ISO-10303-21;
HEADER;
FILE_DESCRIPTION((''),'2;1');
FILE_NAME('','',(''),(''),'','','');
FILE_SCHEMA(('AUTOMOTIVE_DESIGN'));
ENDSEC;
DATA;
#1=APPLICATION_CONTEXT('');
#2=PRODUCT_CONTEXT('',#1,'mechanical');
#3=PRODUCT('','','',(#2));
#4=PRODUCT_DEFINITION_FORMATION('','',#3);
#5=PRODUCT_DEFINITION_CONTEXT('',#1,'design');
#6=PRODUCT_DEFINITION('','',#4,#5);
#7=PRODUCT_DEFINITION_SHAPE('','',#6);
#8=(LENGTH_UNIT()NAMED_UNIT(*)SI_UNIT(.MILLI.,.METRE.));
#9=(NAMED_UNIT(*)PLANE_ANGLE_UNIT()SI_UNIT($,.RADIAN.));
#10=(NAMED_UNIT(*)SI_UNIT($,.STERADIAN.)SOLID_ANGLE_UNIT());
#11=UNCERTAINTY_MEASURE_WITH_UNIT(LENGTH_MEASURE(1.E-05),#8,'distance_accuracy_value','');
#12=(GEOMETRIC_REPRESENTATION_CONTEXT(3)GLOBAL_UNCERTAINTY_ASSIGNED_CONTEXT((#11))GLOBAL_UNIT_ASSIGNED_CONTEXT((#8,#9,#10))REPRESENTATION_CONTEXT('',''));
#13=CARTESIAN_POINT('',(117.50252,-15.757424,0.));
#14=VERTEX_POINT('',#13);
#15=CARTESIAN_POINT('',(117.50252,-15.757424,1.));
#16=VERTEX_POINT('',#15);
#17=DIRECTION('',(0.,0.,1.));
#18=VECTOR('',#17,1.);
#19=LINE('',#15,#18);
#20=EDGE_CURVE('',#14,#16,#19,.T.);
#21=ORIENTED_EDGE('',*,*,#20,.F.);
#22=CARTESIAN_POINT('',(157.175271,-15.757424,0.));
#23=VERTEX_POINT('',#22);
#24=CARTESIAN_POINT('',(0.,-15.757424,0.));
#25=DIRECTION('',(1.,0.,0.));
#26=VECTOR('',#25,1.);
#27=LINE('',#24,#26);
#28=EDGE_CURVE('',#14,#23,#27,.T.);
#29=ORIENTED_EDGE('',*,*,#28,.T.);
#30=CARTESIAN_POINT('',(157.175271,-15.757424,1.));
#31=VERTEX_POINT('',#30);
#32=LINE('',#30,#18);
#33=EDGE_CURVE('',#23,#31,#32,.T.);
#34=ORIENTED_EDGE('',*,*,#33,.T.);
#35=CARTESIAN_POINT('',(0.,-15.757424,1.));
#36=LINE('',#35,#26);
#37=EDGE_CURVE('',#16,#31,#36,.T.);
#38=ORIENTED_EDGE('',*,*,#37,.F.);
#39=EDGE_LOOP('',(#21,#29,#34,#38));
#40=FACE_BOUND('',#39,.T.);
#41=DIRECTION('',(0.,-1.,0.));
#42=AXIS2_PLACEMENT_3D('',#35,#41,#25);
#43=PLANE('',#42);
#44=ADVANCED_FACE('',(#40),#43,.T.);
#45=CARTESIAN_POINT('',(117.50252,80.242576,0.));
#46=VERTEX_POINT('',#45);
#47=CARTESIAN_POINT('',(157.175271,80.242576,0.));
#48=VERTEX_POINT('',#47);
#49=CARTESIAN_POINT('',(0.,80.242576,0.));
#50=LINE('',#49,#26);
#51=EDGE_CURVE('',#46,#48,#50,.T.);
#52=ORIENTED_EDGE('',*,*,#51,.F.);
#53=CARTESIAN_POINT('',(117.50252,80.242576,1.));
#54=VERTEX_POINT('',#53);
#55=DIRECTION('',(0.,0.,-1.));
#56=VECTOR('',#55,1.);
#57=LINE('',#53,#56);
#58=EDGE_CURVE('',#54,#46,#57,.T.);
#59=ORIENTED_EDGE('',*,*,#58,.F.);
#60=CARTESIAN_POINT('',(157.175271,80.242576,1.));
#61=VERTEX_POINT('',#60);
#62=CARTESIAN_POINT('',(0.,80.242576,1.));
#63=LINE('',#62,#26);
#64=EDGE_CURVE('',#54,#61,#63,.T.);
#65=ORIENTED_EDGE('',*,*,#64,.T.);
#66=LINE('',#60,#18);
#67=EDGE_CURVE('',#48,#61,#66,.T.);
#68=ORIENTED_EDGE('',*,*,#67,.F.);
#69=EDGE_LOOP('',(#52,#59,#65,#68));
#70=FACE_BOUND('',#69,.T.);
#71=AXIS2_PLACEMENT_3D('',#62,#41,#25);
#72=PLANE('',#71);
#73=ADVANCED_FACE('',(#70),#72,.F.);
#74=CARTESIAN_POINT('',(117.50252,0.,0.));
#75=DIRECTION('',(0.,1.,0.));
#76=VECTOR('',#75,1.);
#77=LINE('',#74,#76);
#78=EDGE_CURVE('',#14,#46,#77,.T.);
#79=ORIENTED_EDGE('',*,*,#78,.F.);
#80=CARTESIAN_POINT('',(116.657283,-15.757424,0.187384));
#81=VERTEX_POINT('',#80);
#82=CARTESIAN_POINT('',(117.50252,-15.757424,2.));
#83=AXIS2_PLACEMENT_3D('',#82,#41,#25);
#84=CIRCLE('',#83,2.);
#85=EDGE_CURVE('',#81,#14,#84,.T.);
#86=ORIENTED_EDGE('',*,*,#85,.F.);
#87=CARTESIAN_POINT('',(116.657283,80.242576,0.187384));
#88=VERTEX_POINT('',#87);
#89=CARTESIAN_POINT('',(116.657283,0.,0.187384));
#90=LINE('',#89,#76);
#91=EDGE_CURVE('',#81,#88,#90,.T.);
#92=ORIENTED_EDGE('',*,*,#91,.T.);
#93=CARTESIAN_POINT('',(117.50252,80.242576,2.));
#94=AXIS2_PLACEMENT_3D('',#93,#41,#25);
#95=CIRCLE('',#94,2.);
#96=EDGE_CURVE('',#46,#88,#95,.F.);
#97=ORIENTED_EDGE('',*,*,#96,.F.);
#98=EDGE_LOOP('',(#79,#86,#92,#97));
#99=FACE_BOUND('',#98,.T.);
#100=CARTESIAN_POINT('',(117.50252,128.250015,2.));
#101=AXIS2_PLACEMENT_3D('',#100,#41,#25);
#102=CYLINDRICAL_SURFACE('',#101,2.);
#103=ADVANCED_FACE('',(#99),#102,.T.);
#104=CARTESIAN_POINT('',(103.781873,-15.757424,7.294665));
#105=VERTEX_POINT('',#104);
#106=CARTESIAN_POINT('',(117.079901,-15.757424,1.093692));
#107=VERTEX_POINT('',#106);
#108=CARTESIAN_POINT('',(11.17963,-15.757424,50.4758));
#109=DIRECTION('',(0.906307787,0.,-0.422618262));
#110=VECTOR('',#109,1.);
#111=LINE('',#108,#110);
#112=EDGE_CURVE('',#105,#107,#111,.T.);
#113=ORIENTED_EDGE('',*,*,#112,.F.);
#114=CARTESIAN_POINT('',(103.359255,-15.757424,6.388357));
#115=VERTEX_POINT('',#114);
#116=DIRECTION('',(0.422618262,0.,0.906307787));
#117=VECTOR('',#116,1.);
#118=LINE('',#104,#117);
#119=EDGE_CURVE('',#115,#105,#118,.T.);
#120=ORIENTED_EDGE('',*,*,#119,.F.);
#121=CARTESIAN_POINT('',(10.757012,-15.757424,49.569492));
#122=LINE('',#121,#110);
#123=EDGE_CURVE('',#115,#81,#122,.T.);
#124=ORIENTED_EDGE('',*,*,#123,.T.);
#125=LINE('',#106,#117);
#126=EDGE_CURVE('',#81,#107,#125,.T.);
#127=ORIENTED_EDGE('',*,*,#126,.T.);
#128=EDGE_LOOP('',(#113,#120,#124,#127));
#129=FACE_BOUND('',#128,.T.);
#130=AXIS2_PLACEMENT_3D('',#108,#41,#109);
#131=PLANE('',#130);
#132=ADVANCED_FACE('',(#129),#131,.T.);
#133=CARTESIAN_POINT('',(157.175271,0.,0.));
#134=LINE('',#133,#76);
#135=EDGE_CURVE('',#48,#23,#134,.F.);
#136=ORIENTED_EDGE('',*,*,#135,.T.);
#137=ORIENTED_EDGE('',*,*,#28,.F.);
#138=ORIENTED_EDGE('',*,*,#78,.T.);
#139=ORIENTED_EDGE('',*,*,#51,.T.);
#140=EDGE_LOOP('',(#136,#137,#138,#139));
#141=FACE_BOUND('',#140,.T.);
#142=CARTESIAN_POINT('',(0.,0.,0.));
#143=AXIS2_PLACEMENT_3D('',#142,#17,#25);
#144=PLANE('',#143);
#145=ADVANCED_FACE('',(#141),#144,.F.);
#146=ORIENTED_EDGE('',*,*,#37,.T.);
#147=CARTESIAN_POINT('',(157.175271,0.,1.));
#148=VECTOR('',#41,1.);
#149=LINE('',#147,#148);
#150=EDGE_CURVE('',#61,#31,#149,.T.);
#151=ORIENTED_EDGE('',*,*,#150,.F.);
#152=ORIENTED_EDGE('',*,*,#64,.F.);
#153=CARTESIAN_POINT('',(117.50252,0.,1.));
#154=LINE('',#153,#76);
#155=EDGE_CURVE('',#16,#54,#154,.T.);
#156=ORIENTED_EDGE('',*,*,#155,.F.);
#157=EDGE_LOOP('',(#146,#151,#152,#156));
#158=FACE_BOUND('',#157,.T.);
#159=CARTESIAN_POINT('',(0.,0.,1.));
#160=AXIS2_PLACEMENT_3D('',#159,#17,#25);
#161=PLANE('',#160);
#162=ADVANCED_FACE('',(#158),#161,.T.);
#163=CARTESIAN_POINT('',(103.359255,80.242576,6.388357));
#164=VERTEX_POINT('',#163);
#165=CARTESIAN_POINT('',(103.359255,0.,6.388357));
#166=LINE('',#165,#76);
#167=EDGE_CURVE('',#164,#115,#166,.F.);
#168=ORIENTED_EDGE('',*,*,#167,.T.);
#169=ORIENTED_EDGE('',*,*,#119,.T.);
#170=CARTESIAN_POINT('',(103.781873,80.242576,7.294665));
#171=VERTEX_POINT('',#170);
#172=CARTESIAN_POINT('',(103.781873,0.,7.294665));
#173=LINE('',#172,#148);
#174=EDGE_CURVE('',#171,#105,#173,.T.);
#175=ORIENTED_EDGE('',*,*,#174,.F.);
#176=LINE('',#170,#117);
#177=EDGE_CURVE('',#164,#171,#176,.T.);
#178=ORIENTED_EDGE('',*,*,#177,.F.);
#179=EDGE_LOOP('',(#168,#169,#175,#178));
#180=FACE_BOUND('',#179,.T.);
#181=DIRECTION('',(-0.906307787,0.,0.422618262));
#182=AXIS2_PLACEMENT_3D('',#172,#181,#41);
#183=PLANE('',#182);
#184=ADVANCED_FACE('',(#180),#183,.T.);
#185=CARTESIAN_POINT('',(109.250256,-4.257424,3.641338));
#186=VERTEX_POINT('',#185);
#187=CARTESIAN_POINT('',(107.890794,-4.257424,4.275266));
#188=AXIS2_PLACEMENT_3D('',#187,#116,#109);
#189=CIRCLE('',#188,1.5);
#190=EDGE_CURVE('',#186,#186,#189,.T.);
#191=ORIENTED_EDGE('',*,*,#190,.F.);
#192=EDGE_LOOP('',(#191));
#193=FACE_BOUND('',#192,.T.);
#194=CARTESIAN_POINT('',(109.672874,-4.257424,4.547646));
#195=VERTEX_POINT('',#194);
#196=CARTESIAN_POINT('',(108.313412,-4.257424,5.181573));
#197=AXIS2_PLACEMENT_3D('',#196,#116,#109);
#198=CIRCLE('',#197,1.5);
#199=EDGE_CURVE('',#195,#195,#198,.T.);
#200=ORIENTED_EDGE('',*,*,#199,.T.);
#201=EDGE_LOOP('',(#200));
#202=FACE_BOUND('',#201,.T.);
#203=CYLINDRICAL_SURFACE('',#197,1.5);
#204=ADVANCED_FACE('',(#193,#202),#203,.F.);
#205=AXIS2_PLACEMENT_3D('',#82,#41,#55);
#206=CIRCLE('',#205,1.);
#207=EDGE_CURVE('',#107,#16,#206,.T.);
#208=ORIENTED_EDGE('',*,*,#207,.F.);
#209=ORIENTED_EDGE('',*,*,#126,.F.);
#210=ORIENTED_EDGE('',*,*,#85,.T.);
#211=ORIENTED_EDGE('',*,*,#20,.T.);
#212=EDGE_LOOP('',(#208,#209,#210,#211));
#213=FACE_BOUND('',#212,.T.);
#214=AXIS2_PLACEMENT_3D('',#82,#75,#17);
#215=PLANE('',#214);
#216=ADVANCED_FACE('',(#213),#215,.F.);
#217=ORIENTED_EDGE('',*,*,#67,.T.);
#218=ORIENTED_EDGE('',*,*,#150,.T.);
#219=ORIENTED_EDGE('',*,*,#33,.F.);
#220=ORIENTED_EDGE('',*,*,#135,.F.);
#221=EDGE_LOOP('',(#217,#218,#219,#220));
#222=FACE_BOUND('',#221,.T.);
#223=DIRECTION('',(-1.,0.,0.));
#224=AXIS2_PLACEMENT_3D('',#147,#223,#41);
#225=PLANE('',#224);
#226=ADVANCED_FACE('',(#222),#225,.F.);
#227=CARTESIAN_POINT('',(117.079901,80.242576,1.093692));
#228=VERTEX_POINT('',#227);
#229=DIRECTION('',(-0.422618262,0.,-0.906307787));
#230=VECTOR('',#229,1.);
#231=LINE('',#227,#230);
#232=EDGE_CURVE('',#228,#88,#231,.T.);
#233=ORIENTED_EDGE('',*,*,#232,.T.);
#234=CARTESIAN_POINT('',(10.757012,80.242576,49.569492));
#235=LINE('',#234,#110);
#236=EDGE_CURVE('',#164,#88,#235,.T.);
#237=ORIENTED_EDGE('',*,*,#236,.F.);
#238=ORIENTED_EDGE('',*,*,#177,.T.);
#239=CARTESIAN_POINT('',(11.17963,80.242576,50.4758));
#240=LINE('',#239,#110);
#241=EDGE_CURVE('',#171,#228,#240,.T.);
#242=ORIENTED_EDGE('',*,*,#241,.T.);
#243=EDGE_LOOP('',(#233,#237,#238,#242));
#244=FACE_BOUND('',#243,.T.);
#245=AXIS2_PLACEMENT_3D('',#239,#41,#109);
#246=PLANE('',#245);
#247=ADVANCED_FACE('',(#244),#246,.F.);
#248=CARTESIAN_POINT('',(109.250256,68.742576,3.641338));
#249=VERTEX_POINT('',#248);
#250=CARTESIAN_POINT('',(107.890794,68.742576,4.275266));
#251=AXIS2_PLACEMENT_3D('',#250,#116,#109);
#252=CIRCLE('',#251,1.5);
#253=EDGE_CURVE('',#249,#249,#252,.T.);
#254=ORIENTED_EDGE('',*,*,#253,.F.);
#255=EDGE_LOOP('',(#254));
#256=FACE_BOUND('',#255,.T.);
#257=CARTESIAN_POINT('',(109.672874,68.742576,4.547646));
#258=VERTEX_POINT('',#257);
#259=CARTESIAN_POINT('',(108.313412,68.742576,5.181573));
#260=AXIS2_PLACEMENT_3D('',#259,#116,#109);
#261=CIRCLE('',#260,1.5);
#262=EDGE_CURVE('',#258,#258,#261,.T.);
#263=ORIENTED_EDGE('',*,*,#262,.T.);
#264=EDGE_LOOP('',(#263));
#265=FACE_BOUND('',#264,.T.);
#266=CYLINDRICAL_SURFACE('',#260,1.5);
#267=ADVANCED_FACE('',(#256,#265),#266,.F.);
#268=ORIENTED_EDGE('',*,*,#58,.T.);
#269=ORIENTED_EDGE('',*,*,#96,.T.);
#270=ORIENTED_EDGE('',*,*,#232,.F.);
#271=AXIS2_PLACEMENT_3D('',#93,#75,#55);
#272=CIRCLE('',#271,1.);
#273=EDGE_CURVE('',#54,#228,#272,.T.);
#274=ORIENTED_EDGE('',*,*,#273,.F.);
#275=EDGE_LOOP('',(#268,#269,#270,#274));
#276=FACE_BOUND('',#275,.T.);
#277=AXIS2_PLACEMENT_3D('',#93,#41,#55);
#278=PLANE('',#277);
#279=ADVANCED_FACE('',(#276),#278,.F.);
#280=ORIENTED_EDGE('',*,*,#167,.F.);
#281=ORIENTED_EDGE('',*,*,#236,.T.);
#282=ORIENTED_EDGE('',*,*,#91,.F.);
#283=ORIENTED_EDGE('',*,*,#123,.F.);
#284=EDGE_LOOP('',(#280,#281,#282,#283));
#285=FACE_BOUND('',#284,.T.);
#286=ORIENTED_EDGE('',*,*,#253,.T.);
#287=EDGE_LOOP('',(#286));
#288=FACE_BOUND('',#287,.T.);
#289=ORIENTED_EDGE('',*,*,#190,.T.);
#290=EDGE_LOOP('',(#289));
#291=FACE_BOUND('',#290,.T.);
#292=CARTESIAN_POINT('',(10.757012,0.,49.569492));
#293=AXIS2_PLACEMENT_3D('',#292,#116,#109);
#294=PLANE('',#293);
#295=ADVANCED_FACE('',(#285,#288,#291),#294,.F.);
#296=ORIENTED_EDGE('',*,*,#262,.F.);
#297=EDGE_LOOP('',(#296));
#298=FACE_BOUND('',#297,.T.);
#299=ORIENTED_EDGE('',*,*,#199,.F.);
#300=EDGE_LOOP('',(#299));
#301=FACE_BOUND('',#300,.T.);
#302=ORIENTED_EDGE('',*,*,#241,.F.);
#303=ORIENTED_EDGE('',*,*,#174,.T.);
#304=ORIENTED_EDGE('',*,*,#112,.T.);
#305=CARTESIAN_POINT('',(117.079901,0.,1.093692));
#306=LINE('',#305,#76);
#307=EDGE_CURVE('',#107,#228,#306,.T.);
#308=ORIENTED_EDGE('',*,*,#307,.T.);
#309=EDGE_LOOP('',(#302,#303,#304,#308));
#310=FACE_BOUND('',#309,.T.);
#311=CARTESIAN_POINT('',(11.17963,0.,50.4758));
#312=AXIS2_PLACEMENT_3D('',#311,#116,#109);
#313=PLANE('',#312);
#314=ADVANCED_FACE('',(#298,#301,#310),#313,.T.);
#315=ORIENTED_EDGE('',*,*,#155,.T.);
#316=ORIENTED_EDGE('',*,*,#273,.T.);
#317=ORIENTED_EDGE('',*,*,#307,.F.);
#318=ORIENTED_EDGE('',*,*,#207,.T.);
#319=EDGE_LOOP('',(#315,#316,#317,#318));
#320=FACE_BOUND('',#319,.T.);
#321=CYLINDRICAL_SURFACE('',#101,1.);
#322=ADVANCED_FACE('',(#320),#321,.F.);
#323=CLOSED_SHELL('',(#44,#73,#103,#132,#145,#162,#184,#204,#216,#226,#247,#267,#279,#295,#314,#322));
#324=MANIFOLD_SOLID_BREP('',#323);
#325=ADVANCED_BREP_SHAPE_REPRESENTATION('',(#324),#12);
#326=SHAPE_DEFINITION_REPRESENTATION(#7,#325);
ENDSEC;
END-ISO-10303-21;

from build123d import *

# Parameters (mm, degrees)
IZIM1_W                     = 40
IZIM1_H                     = 96
IZIM1_W_2                   = 15
IZIM1_R                     = 1.5
Y_KSEKLIK_EKSTR_ZYON2_DEPTH = 1
IZGIDEN_START               = 43.181135212
IZGIDEN_B_KME3_OUTLINE_R    = 1.5
IZGIDEN_B_KME3_DEPTH        = 3.071295426
IZGIDEN_START_2             = -15.757423971
IZGIDEN_B_KME3_2_DEPTH      = 96
IZGIDEN_B_KME3_3_DEPTH      = 96
IZGIDEN_START_3             = 48
IZGIDEN_B_KME3_4_OUTLINE_R  = 1.5
IZGIDEN_B_KME3_4_DEPTH      = 2.471326215


with BuildPart() as part:
    # Çizim1 → Yükseklik-Ekstrüzyon2 (new body)
    # profile 1 of 2: a face of its own
    with BuildSketch(Plane.XY):
        with Locations((137.175270501, 32.242576029)):
            Rectangle(IZIM1_W, IZIM1_H)
    # profile 2 of 2: a face of its own
    with BuildSketch(Plane.XY):
        with Locations((109.675270501, 32.242576029)):
            Rectangle(IZIM1_W_2, IZIM1_H)
        with Locations((107.175270501, -4.257423971)):
            Circle(IZIM1_R, mode=Mode.SUBTRACT)
        with Locations((107.175270501, 68.742576029)):
            Circle(IZIM1_R, mode=Mode.SUBTRACT)
    extrude(amount=Y_KSEKLIK_EKSTR_ZYON2_DEPTH)

    # Çizgiden Bükme3: read off the stored shape, not the designer's step
    # Çizgiden Bükme3 outline → Çizgiden Bükme3 (cut)
    with BuildSketch(Plane(origin=(0, 0, 0), x_dir=(0.9063077870366497, 0, -0.42261826174069983), z_dir=(0.4226182617406999, 0, 0.9063077870366498)).offset(IZGIDEN_START)):
        with Locations((95.975461344, -4.257423971)):
            Circle(IZGIDEN_B_KME3_OUTLINE_R)
        with Locations((95.975461344, 68.742576029)):
            Circle(IZGIDEN_B_KME3_OUTLINE_R)
    extrude(amount=IZGIDEN_B_KME3_DEPTH, mode=Mode.SUBTRACT)

    # izgiden B_kme3 2 outline → izgiden B_kme3 2 (cut)
    with BuildSketch(Plane(origin=(0, 0, 0), x_dir=(1, 0, 0), z_dir=(0, 1, 0)).offset(IZGIDEN_START_2)):
        with BuildLine():
            Line((102.175270501, -1), (114.91462349, -1))
            Line((114.91462349, -1), (116.657283212, -0.187384426))
            ThreePointArc((116.657283212, -0.187384426), (117.069640507, -0.047407986), (117.502519735, 0))
            Line((117.502519735, 0), (102.175270501, 0))
            Line((102.175270501, 0), (102.175270501, -1))
        make_face()
    extrude(amount=IZGIDEN_B_KME3_2_DEPTH, mode=Mode.SUBTRACT)

    # izgiden B_kme3 3 outline → izgiden B_kme3 3 (add)
    with BuildSketch(Plane(origin=(0, 0, 0), x_dir=(1, 0, 0), z_dir=(0, 1, 0)).offset(IZGIDEN_START_2)):
        with BuildLine():
            Line((103.359254936, -6.388356849), (103.781873198, -7.294664636))
            Line((103.781873198, -7.294664636), (117.079901474, -1.093692213))
            ThreePointArc((117.079901474, -1.093692213), (117.286080121, -1.023703993), (117.502519735, -1))
            Line((117.502519735, -1), (114.91462349, -1))
            Line((114.91462349, -1), (103.359254936, -6.388356849))
        make_face()
    extrude(amount=IZGIDEN_B_KME3_3_DEPTH)

    # izgiden B_kme3 4 outline → izgiden B_kme3 4 (cut)
    with BuildSketch(Plane(origin=(0, 0, 0), x_dir=(0.9063077870366497, 0, -0.42261826174069983), z_dir=(0.4226182617406999, 0, 0.9063077870366498)).offset(IZGIDEN_START_3)):
        with Locations((95.975461344, -4.257423971)):
            Circle(IZGIDEN_B_KME3_4_OUTLINE_R)
        with Locations((95.975461344, 68.742576029)):
            Circle(IZGIDEN_B_KME3_4_OUTLINE_R)
    extrude(amount=IZGIDEN_B_KME3_4_DEPTH, mode=Mode.SUBTRACT)


solid = part.part
